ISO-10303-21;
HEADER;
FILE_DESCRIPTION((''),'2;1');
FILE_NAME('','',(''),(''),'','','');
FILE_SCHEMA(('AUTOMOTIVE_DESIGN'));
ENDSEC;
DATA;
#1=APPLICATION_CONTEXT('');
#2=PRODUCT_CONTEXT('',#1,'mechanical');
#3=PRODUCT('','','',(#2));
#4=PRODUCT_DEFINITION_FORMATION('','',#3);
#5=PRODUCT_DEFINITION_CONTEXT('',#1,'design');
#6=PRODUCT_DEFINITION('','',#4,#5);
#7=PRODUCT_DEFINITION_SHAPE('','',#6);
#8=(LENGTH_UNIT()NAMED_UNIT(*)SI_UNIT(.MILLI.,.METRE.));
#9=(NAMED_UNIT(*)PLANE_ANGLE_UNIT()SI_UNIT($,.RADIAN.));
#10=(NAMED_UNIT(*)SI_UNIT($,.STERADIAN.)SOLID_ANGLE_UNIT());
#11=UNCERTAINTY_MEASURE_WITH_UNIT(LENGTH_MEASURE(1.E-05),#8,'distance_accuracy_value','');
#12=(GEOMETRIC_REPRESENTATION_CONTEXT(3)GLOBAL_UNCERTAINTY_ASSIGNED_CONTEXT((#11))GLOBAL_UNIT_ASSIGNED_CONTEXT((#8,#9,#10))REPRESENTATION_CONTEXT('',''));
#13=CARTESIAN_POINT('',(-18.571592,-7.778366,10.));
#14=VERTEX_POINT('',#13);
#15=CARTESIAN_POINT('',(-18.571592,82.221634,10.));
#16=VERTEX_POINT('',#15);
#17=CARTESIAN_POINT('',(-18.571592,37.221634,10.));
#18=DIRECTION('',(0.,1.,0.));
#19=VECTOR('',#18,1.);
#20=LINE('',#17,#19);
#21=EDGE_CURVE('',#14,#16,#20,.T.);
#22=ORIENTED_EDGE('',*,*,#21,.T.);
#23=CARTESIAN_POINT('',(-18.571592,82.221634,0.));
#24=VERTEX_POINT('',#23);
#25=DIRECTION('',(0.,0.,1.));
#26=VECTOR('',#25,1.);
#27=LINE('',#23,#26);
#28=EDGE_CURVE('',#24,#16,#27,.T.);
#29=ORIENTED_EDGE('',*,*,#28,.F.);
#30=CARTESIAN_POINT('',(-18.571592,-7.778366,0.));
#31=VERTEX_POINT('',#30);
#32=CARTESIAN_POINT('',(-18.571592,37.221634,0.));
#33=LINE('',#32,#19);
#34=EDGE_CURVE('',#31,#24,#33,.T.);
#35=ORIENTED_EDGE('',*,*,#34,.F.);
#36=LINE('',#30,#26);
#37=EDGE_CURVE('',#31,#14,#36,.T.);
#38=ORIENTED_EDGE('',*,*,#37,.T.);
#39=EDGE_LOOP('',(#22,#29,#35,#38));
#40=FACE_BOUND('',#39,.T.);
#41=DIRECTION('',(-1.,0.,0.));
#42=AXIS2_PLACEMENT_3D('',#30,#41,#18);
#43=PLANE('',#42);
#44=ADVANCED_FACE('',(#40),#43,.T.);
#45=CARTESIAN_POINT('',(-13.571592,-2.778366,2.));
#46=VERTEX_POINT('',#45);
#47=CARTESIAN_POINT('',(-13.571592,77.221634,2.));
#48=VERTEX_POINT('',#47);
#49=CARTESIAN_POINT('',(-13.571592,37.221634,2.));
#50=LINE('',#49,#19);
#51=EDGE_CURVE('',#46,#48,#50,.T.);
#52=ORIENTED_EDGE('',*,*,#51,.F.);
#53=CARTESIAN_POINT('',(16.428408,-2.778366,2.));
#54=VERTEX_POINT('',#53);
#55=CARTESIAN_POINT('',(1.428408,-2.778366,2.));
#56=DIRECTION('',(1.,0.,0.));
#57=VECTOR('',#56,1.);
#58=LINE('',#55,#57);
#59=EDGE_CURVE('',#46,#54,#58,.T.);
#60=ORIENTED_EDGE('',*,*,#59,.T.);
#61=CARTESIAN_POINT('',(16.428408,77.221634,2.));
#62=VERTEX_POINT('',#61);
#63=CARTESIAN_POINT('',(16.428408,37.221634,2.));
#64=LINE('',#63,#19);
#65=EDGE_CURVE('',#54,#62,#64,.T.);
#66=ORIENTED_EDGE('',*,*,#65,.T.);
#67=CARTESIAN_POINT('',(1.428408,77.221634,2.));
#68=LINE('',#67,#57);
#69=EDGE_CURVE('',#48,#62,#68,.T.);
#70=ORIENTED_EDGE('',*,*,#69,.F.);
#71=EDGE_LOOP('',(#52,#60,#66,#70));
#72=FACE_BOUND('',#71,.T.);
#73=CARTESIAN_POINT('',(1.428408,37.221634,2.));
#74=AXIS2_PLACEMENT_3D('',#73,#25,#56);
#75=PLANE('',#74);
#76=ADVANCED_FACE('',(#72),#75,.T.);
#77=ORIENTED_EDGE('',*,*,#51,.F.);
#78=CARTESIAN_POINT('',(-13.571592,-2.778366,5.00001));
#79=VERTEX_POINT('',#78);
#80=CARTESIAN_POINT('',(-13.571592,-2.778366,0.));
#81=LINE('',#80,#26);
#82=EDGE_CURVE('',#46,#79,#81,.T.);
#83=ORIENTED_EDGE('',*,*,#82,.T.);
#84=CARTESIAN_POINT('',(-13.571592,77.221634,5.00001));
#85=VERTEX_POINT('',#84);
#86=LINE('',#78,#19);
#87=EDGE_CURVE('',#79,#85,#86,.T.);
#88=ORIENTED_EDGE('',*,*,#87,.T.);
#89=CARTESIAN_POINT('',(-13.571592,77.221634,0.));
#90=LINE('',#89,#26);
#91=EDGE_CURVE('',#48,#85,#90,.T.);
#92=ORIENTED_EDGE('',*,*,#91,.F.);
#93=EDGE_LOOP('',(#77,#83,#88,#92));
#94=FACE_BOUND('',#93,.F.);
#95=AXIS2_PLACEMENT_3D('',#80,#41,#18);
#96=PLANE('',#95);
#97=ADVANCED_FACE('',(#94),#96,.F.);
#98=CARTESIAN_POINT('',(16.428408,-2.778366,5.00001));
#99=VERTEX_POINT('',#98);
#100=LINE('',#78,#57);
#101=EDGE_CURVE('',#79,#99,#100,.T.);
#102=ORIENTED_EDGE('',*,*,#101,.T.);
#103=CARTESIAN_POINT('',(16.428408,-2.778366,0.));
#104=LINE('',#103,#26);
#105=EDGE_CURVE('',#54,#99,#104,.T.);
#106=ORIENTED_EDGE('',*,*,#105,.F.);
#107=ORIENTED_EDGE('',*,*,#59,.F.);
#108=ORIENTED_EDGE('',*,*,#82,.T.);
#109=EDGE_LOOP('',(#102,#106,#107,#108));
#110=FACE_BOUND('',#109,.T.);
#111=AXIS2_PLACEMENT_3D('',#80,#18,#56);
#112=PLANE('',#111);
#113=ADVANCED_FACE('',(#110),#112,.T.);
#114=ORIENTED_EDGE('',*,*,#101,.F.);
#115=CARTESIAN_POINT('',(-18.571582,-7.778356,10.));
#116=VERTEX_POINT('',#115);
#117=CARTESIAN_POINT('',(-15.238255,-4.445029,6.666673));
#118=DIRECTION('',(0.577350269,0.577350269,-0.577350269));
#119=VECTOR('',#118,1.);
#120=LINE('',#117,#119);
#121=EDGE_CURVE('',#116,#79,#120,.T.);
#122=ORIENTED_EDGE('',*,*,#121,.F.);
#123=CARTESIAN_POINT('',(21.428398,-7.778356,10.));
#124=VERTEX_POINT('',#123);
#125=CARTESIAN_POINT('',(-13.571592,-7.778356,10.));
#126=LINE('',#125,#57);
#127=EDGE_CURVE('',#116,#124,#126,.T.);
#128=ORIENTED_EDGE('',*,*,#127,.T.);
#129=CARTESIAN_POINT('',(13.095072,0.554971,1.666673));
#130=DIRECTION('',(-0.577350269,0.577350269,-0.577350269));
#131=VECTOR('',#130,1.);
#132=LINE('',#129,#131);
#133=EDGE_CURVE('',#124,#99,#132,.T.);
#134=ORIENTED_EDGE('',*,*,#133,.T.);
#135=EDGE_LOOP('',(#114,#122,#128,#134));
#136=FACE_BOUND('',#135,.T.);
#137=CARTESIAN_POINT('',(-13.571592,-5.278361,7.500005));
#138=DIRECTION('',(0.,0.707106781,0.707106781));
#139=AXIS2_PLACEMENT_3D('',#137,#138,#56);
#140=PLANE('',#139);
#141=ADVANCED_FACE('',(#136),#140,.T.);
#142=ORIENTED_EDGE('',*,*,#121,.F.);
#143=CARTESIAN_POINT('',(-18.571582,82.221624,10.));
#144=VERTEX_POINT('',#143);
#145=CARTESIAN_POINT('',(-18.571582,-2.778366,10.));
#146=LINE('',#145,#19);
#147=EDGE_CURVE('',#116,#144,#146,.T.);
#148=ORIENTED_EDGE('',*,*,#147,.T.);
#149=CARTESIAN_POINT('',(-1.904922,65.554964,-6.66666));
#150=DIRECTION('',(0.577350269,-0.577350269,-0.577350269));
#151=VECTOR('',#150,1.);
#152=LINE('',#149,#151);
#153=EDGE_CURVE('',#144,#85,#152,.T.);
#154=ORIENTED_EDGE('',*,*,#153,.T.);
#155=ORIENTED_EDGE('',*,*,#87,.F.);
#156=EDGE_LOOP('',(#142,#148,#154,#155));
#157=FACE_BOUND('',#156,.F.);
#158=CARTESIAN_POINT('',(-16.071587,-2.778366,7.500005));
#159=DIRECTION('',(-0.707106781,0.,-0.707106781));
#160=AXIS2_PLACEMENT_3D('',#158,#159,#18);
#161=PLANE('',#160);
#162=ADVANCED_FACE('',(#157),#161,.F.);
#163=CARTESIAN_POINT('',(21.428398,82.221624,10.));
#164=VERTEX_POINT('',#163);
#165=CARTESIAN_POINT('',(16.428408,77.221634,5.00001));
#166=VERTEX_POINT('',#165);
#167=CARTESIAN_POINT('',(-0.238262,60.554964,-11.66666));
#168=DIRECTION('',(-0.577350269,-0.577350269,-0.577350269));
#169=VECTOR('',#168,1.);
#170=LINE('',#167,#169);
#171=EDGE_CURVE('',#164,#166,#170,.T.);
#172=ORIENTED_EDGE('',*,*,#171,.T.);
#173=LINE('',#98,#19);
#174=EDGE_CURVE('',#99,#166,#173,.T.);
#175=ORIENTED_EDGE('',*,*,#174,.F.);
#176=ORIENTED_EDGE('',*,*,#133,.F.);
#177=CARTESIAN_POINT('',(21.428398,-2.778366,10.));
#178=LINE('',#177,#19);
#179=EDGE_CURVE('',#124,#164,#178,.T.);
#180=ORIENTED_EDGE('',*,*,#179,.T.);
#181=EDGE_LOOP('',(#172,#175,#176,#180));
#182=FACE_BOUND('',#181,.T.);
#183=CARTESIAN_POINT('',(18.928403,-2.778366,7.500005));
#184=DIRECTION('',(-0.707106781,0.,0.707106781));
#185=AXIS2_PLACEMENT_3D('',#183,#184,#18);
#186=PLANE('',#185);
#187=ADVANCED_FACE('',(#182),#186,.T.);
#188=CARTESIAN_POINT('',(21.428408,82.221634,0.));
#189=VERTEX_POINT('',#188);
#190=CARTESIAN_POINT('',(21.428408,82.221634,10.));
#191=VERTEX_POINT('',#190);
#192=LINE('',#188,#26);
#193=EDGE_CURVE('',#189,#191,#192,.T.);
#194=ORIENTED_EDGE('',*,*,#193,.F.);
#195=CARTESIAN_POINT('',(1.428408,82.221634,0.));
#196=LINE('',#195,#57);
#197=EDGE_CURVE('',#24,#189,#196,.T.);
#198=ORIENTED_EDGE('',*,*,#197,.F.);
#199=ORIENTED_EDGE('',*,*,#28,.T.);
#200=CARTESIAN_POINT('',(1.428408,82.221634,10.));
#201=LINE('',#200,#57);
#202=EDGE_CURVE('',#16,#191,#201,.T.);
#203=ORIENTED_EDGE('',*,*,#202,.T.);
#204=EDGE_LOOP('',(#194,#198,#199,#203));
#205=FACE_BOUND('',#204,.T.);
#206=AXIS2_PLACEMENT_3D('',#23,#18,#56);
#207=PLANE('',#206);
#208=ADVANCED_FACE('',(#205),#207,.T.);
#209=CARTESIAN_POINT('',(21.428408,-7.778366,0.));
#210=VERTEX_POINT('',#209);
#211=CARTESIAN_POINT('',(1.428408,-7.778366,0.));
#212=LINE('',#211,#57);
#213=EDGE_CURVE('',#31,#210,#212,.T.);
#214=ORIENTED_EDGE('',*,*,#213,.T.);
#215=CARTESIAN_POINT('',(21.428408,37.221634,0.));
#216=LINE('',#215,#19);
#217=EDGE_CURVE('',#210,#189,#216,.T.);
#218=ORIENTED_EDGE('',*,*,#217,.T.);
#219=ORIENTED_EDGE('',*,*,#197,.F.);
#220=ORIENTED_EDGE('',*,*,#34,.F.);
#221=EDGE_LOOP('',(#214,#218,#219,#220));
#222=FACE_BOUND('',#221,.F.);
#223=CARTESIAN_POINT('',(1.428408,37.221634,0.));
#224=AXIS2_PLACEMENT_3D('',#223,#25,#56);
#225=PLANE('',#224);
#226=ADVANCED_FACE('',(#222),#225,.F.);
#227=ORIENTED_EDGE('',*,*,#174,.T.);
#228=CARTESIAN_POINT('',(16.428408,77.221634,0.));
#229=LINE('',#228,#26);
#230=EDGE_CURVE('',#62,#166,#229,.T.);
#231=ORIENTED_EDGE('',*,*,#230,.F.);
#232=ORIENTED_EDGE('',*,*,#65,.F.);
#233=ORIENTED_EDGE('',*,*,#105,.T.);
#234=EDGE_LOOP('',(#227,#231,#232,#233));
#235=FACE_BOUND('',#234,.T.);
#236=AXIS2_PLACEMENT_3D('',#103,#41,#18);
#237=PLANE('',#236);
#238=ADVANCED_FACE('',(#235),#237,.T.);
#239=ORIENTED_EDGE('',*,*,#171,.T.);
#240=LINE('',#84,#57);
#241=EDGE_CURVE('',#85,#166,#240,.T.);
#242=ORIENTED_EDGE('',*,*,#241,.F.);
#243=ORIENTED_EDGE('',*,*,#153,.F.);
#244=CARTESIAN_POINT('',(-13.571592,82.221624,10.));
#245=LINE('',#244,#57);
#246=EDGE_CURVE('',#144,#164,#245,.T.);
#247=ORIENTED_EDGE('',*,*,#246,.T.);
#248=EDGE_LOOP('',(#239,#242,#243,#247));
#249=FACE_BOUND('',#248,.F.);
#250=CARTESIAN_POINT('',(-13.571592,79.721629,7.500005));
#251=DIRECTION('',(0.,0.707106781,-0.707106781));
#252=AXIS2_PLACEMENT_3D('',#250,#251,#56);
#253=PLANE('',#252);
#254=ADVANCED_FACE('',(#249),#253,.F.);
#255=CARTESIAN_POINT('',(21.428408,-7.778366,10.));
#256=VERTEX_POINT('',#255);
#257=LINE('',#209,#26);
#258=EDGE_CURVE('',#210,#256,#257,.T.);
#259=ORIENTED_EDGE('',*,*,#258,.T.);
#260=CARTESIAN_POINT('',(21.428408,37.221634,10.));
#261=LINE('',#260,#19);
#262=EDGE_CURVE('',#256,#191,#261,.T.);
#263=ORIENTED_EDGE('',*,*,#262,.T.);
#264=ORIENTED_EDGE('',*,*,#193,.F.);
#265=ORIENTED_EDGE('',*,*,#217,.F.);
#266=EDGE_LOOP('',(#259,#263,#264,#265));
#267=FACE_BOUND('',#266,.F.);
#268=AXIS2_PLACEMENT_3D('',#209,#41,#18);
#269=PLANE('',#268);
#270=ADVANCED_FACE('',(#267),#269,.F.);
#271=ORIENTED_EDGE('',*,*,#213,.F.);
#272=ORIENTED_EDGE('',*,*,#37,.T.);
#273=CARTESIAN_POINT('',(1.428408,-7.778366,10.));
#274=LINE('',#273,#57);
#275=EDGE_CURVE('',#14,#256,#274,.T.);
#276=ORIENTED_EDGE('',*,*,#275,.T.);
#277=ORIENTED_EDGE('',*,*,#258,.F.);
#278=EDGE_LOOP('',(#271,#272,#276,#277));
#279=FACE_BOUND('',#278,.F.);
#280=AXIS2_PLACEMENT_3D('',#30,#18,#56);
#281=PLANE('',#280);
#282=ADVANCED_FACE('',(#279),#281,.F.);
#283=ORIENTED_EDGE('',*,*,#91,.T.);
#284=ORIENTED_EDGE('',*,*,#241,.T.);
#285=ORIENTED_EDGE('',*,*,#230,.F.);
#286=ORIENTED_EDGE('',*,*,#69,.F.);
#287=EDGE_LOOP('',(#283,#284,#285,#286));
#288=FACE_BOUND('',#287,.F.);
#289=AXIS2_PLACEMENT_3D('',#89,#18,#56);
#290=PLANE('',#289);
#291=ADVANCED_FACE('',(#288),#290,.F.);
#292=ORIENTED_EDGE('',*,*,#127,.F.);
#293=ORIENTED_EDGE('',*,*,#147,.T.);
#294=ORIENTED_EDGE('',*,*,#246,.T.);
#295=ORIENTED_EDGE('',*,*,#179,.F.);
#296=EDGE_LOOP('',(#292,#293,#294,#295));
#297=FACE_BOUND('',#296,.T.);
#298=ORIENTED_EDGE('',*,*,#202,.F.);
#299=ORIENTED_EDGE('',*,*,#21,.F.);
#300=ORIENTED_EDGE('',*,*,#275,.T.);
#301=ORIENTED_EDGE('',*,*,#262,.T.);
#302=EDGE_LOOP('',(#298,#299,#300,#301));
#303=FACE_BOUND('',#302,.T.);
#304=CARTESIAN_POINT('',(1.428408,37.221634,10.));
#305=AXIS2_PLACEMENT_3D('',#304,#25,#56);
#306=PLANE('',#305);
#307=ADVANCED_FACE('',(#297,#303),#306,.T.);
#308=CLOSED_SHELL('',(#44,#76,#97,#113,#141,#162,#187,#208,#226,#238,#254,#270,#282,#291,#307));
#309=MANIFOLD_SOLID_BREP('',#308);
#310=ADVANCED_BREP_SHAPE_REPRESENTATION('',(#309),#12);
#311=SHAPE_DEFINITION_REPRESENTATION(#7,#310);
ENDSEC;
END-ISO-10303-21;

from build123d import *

# Parameters (mm, degrees)
F0_W     = 40
F0_H     = 90
F0_W_2   = 30
F0_H_2   = 80
F1_DEPTH = 10
F2_DEPTH = 2
F3_SIZE  = 4.99999


# Not quite as in the source:
# - a fillet or chamfer is up to 0.001 mm smaller than in the source, because OpenCascade refuses the exact size


with BuildPart() as f1:
    # F0 (on Top) → F1 (new body)
    with BuildSketch(Plane.XY):
        with Locations((1.4284082502, 37.2216339977)):
            Rectangle(F0_W, F0_H)
        with Locations((1.4284082502, 37.2216339977)):
            Rectangle(F0_W_2, F0_H_2, mode=Mode.SUBTRACT)
    extrude(amount=F1_DEPTH)

    # F0 (on Top) → F2 (join)
    with BuildSketch(Plane.XY):
        with Locations((1.4284082502, 37.2216339977)):
            Rectangle(F0_W_2, F0_H_2)
    extrude(amount=F2_DEPTH)

    # F3 (size 5 in the source; OpenCascade refuses exactly that, so slightly less here)
    f3_edges = [f1.edges().sort_by_distance(p)[0] for p in [
        (16.428408, 37.221634, 10),
        (1.428408, 77.221634, 10),
        (-13.571592, 37.221634, 10),
        (1.428408, -2.778366, 10),
    ]]
    chamfer(f3_edges, length=F3_SIZE)


solid = f1.part
